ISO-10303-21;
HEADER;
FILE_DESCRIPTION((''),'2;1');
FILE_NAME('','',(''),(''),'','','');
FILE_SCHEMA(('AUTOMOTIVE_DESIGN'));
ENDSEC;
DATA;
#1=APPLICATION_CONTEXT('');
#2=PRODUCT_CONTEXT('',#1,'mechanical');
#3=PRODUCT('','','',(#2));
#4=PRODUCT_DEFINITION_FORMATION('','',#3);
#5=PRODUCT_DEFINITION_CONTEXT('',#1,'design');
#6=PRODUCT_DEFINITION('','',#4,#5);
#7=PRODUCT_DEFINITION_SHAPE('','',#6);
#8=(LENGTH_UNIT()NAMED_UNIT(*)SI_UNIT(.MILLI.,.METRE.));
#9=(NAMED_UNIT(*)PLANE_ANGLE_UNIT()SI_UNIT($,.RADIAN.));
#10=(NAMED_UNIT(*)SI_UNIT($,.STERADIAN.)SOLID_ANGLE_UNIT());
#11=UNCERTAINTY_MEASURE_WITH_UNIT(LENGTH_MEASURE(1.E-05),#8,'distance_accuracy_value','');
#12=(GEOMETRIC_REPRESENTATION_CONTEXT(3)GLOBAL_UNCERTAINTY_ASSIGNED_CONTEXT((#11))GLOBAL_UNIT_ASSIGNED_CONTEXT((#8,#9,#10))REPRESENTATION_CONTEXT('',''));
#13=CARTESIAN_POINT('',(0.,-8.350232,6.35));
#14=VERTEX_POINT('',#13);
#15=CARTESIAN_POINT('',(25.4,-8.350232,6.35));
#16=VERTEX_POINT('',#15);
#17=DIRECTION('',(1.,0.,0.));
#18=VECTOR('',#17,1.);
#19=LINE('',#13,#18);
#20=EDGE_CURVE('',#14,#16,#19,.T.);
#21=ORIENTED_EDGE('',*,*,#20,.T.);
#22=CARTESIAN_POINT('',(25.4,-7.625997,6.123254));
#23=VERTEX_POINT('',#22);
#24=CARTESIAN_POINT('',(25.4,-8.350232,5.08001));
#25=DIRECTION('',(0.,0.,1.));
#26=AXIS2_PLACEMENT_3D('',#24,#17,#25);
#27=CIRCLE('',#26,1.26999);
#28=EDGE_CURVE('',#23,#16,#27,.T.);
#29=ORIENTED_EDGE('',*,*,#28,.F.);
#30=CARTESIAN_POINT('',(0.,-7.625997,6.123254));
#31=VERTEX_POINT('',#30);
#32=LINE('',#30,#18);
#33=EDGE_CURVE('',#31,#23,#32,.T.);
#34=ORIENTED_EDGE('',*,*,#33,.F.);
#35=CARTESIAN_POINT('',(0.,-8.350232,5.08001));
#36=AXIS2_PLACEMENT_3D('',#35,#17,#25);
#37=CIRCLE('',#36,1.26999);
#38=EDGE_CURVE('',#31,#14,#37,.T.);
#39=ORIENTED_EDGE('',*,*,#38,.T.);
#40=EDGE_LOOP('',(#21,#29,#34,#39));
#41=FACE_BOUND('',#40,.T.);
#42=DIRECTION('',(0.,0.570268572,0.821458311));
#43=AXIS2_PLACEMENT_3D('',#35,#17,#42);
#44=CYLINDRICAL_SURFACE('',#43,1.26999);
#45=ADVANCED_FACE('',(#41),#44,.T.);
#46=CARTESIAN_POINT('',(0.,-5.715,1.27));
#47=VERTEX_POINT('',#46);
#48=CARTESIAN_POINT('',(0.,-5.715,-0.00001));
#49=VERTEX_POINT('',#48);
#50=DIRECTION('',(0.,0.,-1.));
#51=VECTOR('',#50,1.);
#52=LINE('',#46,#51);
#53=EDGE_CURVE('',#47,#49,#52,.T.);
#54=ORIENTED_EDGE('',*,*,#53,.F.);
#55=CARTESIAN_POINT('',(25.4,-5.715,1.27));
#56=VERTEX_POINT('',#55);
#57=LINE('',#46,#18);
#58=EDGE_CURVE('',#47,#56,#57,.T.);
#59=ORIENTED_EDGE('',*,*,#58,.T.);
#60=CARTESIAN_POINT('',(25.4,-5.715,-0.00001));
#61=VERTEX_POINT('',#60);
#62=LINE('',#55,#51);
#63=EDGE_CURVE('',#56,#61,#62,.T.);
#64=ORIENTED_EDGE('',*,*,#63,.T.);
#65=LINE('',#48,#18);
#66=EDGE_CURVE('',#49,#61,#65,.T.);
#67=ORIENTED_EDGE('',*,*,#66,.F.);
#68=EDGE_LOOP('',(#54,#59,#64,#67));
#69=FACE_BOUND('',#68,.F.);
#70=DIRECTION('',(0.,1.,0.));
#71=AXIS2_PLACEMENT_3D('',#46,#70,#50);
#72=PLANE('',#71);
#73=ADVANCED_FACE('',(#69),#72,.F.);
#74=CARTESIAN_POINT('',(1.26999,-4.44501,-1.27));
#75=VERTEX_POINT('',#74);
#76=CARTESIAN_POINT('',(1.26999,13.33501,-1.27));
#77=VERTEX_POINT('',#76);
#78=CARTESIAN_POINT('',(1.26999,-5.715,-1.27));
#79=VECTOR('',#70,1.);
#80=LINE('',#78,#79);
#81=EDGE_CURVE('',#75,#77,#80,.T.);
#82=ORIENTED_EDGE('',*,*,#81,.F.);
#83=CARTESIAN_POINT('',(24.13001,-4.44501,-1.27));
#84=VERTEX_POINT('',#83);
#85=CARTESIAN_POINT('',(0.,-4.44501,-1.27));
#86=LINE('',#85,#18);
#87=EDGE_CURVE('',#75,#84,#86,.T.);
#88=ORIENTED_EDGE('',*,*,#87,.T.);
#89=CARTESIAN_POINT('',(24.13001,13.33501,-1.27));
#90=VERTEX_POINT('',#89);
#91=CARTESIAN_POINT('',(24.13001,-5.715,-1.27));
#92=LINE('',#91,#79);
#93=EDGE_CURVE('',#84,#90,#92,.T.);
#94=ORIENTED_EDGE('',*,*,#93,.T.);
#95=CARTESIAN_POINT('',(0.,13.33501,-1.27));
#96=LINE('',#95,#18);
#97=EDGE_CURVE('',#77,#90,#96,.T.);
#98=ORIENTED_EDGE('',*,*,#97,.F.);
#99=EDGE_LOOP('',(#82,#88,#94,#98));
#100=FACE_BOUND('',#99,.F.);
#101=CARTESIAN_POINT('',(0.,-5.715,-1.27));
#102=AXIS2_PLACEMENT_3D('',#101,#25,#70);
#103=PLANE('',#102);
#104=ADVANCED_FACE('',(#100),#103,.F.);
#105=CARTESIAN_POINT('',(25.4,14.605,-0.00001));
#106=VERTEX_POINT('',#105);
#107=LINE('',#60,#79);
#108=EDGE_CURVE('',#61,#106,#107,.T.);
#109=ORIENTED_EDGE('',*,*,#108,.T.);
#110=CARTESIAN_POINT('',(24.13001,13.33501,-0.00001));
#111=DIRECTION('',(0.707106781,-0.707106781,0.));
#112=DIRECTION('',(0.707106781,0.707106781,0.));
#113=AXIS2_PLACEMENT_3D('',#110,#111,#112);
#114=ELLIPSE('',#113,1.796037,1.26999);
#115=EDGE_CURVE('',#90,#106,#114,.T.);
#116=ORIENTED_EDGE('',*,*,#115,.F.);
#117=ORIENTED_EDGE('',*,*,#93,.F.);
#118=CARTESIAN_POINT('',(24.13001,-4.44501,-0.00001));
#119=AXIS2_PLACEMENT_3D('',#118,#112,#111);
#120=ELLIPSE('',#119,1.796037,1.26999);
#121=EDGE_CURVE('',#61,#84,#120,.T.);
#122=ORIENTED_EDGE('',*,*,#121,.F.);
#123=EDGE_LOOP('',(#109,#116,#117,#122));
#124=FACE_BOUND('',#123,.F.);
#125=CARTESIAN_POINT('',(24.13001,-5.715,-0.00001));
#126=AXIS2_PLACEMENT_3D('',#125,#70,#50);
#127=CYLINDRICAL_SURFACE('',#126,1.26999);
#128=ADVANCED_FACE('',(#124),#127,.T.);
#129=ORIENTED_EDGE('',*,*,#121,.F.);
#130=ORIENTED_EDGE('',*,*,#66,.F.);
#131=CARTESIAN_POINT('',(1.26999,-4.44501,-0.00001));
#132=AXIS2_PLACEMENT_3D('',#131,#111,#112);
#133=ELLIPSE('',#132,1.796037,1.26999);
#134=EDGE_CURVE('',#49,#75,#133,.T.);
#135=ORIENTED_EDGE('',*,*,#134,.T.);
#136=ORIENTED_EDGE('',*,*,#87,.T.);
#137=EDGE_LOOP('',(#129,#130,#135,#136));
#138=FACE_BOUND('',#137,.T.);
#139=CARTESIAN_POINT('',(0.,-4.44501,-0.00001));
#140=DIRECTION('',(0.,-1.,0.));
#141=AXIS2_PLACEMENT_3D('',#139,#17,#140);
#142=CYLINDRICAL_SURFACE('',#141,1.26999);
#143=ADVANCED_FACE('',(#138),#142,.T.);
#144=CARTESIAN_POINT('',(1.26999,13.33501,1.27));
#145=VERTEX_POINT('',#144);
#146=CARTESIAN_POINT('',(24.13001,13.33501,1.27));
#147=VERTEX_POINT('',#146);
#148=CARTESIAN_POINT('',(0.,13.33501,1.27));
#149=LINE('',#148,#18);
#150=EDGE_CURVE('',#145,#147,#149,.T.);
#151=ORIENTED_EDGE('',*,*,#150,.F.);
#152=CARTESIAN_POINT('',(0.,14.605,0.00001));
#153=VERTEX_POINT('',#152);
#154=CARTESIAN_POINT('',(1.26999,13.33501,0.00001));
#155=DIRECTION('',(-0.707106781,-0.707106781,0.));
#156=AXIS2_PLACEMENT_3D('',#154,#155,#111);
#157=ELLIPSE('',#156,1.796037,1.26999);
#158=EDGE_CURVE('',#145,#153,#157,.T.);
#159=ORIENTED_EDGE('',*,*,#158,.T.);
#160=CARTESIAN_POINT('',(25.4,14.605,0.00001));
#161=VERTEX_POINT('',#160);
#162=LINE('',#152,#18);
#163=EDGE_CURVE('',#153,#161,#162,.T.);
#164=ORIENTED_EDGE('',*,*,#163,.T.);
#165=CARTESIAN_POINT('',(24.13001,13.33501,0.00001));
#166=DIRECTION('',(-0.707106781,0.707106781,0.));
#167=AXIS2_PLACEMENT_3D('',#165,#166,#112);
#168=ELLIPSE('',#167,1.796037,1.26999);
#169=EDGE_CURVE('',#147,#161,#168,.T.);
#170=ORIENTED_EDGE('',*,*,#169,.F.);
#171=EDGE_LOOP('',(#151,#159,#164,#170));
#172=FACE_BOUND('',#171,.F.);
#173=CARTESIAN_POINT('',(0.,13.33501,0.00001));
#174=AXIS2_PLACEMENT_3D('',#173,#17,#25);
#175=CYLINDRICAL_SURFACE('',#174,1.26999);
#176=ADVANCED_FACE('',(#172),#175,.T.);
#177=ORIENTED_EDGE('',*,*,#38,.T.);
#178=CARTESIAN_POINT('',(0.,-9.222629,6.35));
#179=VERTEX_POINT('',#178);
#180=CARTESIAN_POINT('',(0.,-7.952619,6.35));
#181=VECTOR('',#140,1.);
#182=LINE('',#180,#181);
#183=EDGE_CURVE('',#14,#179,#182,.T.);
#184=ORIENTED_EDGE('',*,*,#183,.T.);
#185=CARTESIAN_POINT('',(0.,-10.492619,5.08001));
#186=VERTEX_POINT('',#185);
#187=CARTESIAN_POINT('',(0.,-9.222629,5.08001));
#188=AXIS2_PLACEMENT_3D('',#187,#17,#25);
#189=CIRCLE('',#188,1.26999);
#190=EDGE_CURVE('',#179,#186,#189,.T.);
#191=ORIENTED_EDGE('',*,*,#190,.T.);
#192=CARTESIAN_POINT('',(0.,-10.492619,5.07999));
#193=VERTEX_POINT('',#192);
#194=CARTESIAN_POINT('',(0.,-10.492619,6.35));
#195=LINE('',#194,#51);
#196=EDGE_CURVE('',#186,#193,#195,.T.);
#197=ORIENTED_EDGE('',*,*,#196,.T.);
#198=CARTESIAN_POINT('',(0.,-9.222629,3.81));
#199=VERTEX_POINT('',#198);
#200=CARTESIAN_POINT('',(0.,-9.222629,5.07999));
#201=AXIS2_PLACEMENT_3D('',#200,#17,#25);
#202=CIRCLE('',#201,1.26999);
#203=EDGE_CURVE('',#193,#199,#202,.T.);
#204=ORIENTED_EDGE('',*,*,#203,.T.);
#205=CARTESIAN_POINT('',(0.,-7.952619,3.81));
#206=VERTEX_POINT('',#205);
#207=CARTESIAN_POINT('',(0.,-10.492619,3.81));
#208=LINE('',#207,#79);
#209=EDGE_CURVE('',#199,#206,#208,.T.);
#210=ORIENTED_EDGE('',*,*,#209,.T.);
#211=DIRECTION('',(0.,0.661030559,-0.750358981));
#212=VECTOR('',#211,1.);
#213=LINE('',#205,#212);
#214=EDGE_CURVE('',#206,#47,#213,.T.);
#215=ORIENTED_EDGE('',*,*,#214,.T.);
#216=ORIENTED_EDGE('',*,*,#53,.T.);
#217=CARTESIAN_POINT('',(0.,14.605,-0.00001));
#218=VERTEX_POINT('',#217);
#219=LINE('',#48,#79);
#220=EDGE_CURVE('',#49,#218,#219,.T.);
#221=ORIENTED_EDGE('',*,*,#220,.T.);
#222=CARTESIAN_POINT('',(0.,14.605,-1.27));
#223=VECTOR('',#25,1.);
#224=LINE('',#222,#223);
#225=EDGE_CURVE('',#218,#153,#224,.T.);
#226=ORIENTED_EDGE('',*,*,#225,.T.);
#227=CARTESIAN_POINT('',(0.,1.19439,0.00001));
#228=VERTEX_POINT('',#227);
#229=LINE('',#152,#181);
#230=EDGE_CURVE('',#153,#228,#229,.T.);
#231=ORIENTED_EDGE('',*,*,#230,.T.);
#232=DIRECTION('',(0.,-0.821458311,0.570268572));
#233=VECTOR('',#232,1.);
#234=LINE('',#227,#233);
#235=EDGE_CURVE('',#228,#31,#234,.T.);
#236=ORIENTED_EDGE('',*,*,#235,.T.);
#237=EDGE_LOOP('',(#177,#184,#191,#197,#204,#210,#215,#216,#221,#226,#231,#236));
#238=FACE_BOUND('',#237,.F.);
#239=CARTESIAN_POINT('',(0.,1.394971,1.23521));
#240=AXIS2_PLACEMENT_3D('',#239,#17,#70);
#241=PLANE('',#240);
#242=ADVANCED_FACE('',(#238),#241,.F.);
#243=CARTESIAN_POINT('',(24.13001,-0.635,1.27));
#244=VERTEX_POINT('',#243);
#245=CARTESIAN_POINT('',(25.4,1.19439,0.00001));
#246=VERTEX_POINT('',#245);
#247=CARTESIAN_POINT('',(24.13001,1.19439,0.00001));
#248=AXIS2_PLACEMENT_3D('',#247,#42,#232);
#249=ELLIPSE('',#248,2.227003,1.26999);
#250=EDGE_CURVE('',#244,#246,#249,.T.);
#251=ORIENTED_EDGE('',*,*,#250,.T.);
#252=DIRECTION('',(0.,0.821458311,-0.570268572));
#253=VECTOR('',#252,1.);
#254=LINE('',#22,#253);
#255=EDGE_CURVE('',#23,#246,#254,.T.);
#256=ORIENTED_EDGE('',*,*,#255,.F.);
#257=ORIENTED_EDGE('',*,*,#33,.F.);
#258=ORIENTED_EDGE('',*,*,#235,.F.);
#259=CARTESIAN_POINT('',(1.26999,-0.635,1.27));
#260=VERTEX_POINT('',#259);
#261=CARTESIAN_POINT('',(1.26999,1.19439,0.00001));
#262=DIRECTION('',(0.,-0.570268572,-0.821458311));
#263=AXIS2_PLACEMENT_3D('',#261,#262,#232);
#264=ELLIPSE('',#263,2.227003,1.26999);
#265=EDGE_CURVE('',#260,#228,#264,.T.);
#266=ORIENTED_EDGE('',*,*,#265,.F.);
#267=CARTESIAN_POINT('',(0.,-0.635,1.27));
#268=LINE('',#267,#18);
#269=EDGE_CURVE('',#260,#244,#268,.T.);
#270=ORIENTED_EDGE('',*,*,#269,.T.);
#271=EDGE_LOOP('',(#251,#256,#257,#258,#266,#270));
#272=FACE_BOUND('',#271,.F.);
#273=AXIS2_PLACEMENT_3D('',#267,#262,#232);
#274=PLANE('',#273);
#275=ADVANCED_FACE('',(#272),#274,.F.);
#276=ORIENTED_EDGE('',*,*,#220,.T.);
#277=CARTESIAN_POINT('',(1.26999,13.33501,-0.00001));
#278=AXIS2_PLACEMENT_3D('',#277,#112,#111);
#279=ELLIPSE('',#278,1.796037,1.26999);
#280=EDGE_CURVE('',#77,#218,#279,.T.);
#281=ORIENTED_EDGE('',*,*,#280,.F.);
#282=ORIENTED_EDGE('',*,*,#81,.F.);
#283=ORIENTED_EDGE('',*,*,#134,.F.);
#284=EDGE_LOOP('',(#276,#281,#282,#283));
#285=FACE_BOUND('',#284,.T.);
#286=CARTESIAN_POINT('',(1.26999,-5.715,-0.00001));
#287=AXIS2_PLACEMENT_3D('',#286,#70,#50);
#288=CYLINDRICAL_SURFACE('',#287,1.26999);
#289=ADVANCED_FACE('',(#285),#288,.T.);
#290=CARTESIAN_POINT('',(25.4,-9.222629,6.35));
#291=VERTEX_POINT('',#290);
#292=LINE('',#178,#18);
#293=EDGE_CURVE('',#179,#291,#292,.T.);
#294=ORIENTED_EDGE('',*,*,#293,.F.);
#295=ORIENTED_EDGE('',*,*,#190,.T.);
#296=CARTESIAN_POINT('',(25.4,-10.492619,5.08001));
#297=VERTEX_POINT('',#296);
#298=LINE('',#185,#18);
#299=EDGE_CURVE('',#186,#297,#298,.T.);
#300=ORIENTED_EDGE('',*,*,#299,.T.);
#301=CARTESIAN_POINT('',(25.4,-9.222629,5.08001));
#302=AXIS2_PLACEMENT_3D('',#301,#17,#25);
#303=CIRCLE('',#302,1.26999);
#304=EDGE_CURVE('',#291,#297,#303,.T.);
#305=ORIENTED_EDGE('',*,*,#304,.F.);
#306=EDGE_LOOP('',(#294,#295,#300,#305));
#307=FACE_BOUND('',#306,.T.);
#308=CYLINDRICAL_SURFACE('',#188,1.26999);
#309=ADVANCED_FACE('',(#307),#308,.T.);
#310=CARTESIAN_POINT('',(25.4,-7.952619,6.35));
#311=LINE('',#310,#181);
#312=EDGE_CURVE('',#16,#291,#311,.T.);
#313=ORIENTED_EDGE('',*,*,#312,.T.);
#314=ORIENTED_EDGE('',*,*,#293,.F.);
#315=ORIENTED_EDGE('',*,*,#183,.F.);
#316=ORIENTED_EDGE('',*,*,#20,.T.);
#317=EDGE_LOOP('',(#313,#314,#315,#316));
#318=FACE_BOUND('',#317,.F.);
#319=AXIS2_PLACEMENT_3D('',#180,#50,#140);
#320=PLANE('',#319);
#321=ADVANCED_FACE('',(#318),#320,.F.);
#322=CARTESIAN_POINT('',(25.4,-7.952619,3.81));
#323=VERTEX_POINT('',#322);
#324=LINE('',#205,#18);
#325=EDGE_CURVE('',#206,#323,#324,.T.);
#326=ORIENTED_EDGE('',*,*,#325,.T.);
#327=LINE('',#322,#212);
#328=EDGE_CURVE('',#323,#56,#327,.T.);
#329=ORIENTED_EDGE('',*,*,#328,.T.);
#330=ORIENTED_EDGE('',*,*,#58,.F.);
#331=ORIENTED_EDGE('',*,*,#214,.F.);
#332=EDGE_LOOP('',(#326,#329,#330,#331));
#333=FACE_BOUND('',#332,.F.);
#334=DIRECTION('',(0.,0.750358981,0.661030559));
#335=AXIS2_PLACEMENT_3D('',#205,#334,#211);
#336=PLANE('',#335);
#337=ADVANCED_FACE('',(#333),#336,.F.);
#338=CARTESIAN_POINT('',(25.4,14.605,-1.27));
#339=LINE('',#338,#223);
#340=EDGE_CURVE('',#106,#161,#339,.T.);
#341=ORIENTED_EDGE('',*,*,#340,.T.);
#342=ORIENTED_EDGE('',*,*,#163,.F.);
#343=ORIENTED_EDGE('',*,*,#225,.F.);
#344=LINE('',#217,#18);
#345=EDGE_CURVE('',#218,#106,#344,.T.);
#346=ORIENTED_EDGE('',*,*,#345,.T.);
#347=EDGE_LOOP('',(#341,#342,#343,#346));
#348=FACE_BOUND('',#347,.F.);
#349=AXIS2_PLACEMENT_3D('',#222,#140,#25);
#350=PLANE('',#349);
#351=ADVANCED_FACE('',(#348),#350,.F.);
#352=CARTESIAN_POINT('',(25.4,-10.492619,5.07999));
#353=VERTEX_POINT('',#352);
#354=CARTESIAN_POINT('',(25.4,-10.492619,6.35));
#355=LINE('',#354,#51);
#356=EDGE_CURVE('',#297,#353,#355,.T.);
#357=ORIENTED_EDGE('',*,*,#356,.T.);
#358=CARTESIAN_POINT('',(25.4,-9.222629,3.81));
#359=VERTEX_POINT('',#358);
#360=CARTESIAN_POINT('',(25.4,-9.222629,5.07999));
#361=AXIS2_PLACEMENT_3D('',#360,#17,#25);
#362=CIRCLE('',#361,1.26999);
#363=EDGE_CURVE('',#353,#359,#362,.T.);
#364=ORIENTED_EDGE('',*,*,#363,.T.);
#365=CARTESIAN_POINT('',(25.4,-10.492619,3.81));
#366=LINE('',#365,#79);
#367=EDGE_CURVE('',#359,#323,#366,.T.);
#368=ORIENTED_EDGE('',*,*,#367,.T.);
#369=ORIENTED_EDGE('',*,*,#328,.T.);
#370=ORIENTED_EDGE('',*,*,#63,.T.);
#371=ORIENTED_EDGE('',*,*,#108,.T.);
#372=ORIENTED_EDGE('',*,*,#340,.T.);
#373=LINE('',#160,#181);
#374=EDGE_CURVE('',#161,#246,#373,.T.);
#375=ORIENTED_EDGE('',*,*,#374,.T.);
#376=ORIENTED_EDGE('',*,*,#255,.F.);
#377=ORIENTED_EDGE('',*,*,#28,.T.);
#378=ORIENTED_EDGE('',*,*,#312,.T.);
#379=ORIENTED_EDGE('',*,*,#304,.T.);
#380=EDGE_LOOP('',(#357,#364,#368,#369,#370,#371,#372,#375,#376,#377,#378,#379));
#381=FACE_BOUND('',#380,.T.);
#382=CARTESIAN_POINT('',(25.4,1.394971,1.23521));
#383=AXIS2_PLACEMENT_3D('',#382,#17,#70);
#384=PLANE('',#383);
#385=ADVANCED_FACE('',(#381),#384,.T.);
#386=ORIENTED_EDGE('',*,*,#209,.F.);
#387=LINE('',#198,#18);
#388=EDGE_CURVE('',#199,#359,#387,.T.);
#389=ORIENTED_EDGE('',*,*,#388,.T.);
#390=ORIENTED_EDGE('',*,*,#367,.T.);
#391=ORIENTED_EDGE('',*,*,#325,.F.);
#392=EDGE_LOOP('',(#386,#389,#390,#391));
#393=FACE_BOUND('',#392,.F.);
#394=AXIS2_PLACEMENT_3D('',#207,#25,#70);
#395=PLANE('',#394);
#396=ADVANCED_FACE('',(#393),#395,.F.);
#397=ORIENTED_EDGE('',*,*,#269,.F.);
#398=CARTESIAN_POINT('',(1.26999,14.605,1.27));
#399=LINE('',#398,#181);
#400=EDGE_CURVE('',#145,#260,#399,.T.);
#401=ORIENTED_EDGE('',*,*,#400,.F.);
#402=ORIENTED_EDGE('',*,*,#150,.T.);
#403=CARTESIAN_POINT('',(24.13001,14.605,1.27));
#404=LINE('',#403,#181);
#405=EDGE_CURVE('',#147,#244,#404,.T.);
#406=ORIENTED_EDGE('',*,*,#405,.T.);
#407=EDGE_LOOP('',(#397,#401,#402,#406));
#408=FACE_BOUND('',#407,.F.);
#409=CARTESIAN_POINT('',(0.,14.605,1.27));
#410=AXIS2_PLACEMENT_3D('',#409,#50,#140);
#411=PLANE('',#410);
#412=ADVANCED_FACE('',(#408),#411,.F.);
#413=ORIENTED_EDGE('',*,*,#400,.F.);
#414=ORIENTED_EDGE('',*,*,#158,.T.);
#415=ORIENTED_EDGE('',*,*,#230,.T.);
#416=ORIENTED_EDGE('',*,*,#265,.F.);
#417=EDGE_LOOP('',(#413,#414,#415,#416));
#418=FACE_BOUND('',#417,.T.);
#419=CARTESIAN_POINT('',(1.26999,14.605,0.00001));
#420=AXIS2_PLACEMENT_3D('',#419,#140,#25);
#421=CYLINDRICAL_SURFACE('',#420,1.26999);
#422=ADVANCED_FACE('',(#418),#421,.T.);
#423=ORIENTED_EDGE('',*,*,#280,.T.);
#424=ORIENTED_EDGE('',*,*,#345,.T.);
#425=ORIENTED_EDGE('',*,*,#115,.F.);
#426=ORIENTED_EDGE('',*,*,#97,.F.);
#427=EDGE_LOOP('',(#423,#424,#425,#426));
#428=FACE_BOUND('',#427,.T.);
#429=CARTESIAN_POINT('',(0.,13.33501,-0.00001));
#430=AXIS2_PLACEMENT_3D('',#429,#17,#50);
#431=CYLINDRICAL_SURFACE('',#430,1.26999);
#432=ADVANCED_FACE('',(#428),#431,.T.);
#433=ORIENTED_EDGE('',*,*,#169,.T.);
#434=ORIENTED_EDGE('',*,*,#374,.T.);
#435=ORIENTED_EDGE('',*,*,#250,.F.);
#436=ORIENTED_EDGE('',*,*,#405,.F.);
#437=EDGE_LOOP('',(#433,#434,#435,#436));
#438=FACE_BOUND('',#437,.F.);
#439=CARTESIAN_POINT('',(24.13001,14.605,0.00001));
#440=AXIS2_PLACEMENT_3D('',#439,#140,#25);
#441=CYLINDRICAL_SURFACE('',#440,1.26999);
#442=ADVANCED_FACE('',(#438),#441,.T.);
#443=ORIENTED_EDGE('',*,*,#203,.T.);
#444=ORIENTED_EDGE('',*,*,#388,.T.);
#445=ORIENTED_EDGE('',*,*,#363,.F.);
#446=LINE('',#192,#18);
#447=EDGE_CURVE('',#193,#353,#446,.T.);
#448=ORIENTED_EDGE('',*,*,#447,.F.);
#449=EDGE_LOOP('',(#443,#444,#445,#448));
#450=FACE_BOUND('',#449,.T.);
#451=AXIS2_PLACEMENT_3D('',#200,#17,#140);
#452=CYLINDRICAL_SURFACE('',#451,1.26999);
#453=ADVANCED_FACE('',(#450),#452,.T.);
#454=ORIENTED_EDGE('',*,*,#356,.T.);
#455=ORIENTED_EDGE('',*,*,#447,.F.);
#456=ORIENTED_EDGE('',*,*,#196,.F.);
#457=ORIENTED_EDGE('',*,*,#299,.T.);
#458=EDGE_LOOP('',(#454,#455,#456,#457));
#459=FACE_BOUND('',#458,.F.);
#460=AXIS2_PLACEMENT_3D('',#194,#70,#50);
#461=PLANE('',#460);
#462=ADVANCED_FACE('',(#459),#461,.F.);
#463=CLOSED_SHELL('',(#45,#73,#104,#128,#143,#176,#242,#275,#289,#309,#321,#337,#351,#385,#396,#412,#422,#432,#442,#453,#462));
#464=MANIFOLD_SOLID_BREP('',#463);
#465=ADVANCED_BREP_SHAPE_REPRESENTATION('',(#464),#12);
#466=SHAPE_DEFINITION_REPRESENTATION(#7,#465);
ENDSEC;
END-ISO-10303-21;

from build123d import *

# Parameters (mm, degrees)
F1_DEPTH = 25.4
F2_R     = 1.26999


# Not quite as in the source:
# - a fillet or chamfer is up to 0.001 mm smaller than in the source, because OpenCascade refuses the exact size


with BuildPart() as f1:
    # F0 (on Right) → F1 (new body)
    with BuildSketch(Plane.YZ):
        Polygon((14.605, 1.27), (-0.635, 1.27), (-7.9526191413, 6.35), (-10.4926191413, 6.35), (-10.4926191413, 3.81), (-7.9526191413, 3.81), (-5.715, 1.27), (-5.715, -1.27), (14.605, -1.27), align=None)
    extrude(amount=F1_DEPTH)

    # F2 (radius 1.27 in the source; OpenCascade refuses exactly that, so slightly less here)
    f2_edges = [f1.edges().sort_by_distance(p)[0] for p in [
        (12.7, -10.492619, 6.35),
        (12.7, -7.952619, 6.35),
        (12.7, -10.492619, 3.81),
        (12.7, 14.605, 1.27),
        (12.7, 14.605, -1.27),
        (12.7, -5.715, -1.27),
        (25.4, 6.985, 1.27),
        (0, 6.985, 1.27),
        (25.4, 4.445, -1.27),
        (0, 4.445, -1.27),
    ]]
    fillet(f2_edges, radius=F2_R)


solid = f1.part
